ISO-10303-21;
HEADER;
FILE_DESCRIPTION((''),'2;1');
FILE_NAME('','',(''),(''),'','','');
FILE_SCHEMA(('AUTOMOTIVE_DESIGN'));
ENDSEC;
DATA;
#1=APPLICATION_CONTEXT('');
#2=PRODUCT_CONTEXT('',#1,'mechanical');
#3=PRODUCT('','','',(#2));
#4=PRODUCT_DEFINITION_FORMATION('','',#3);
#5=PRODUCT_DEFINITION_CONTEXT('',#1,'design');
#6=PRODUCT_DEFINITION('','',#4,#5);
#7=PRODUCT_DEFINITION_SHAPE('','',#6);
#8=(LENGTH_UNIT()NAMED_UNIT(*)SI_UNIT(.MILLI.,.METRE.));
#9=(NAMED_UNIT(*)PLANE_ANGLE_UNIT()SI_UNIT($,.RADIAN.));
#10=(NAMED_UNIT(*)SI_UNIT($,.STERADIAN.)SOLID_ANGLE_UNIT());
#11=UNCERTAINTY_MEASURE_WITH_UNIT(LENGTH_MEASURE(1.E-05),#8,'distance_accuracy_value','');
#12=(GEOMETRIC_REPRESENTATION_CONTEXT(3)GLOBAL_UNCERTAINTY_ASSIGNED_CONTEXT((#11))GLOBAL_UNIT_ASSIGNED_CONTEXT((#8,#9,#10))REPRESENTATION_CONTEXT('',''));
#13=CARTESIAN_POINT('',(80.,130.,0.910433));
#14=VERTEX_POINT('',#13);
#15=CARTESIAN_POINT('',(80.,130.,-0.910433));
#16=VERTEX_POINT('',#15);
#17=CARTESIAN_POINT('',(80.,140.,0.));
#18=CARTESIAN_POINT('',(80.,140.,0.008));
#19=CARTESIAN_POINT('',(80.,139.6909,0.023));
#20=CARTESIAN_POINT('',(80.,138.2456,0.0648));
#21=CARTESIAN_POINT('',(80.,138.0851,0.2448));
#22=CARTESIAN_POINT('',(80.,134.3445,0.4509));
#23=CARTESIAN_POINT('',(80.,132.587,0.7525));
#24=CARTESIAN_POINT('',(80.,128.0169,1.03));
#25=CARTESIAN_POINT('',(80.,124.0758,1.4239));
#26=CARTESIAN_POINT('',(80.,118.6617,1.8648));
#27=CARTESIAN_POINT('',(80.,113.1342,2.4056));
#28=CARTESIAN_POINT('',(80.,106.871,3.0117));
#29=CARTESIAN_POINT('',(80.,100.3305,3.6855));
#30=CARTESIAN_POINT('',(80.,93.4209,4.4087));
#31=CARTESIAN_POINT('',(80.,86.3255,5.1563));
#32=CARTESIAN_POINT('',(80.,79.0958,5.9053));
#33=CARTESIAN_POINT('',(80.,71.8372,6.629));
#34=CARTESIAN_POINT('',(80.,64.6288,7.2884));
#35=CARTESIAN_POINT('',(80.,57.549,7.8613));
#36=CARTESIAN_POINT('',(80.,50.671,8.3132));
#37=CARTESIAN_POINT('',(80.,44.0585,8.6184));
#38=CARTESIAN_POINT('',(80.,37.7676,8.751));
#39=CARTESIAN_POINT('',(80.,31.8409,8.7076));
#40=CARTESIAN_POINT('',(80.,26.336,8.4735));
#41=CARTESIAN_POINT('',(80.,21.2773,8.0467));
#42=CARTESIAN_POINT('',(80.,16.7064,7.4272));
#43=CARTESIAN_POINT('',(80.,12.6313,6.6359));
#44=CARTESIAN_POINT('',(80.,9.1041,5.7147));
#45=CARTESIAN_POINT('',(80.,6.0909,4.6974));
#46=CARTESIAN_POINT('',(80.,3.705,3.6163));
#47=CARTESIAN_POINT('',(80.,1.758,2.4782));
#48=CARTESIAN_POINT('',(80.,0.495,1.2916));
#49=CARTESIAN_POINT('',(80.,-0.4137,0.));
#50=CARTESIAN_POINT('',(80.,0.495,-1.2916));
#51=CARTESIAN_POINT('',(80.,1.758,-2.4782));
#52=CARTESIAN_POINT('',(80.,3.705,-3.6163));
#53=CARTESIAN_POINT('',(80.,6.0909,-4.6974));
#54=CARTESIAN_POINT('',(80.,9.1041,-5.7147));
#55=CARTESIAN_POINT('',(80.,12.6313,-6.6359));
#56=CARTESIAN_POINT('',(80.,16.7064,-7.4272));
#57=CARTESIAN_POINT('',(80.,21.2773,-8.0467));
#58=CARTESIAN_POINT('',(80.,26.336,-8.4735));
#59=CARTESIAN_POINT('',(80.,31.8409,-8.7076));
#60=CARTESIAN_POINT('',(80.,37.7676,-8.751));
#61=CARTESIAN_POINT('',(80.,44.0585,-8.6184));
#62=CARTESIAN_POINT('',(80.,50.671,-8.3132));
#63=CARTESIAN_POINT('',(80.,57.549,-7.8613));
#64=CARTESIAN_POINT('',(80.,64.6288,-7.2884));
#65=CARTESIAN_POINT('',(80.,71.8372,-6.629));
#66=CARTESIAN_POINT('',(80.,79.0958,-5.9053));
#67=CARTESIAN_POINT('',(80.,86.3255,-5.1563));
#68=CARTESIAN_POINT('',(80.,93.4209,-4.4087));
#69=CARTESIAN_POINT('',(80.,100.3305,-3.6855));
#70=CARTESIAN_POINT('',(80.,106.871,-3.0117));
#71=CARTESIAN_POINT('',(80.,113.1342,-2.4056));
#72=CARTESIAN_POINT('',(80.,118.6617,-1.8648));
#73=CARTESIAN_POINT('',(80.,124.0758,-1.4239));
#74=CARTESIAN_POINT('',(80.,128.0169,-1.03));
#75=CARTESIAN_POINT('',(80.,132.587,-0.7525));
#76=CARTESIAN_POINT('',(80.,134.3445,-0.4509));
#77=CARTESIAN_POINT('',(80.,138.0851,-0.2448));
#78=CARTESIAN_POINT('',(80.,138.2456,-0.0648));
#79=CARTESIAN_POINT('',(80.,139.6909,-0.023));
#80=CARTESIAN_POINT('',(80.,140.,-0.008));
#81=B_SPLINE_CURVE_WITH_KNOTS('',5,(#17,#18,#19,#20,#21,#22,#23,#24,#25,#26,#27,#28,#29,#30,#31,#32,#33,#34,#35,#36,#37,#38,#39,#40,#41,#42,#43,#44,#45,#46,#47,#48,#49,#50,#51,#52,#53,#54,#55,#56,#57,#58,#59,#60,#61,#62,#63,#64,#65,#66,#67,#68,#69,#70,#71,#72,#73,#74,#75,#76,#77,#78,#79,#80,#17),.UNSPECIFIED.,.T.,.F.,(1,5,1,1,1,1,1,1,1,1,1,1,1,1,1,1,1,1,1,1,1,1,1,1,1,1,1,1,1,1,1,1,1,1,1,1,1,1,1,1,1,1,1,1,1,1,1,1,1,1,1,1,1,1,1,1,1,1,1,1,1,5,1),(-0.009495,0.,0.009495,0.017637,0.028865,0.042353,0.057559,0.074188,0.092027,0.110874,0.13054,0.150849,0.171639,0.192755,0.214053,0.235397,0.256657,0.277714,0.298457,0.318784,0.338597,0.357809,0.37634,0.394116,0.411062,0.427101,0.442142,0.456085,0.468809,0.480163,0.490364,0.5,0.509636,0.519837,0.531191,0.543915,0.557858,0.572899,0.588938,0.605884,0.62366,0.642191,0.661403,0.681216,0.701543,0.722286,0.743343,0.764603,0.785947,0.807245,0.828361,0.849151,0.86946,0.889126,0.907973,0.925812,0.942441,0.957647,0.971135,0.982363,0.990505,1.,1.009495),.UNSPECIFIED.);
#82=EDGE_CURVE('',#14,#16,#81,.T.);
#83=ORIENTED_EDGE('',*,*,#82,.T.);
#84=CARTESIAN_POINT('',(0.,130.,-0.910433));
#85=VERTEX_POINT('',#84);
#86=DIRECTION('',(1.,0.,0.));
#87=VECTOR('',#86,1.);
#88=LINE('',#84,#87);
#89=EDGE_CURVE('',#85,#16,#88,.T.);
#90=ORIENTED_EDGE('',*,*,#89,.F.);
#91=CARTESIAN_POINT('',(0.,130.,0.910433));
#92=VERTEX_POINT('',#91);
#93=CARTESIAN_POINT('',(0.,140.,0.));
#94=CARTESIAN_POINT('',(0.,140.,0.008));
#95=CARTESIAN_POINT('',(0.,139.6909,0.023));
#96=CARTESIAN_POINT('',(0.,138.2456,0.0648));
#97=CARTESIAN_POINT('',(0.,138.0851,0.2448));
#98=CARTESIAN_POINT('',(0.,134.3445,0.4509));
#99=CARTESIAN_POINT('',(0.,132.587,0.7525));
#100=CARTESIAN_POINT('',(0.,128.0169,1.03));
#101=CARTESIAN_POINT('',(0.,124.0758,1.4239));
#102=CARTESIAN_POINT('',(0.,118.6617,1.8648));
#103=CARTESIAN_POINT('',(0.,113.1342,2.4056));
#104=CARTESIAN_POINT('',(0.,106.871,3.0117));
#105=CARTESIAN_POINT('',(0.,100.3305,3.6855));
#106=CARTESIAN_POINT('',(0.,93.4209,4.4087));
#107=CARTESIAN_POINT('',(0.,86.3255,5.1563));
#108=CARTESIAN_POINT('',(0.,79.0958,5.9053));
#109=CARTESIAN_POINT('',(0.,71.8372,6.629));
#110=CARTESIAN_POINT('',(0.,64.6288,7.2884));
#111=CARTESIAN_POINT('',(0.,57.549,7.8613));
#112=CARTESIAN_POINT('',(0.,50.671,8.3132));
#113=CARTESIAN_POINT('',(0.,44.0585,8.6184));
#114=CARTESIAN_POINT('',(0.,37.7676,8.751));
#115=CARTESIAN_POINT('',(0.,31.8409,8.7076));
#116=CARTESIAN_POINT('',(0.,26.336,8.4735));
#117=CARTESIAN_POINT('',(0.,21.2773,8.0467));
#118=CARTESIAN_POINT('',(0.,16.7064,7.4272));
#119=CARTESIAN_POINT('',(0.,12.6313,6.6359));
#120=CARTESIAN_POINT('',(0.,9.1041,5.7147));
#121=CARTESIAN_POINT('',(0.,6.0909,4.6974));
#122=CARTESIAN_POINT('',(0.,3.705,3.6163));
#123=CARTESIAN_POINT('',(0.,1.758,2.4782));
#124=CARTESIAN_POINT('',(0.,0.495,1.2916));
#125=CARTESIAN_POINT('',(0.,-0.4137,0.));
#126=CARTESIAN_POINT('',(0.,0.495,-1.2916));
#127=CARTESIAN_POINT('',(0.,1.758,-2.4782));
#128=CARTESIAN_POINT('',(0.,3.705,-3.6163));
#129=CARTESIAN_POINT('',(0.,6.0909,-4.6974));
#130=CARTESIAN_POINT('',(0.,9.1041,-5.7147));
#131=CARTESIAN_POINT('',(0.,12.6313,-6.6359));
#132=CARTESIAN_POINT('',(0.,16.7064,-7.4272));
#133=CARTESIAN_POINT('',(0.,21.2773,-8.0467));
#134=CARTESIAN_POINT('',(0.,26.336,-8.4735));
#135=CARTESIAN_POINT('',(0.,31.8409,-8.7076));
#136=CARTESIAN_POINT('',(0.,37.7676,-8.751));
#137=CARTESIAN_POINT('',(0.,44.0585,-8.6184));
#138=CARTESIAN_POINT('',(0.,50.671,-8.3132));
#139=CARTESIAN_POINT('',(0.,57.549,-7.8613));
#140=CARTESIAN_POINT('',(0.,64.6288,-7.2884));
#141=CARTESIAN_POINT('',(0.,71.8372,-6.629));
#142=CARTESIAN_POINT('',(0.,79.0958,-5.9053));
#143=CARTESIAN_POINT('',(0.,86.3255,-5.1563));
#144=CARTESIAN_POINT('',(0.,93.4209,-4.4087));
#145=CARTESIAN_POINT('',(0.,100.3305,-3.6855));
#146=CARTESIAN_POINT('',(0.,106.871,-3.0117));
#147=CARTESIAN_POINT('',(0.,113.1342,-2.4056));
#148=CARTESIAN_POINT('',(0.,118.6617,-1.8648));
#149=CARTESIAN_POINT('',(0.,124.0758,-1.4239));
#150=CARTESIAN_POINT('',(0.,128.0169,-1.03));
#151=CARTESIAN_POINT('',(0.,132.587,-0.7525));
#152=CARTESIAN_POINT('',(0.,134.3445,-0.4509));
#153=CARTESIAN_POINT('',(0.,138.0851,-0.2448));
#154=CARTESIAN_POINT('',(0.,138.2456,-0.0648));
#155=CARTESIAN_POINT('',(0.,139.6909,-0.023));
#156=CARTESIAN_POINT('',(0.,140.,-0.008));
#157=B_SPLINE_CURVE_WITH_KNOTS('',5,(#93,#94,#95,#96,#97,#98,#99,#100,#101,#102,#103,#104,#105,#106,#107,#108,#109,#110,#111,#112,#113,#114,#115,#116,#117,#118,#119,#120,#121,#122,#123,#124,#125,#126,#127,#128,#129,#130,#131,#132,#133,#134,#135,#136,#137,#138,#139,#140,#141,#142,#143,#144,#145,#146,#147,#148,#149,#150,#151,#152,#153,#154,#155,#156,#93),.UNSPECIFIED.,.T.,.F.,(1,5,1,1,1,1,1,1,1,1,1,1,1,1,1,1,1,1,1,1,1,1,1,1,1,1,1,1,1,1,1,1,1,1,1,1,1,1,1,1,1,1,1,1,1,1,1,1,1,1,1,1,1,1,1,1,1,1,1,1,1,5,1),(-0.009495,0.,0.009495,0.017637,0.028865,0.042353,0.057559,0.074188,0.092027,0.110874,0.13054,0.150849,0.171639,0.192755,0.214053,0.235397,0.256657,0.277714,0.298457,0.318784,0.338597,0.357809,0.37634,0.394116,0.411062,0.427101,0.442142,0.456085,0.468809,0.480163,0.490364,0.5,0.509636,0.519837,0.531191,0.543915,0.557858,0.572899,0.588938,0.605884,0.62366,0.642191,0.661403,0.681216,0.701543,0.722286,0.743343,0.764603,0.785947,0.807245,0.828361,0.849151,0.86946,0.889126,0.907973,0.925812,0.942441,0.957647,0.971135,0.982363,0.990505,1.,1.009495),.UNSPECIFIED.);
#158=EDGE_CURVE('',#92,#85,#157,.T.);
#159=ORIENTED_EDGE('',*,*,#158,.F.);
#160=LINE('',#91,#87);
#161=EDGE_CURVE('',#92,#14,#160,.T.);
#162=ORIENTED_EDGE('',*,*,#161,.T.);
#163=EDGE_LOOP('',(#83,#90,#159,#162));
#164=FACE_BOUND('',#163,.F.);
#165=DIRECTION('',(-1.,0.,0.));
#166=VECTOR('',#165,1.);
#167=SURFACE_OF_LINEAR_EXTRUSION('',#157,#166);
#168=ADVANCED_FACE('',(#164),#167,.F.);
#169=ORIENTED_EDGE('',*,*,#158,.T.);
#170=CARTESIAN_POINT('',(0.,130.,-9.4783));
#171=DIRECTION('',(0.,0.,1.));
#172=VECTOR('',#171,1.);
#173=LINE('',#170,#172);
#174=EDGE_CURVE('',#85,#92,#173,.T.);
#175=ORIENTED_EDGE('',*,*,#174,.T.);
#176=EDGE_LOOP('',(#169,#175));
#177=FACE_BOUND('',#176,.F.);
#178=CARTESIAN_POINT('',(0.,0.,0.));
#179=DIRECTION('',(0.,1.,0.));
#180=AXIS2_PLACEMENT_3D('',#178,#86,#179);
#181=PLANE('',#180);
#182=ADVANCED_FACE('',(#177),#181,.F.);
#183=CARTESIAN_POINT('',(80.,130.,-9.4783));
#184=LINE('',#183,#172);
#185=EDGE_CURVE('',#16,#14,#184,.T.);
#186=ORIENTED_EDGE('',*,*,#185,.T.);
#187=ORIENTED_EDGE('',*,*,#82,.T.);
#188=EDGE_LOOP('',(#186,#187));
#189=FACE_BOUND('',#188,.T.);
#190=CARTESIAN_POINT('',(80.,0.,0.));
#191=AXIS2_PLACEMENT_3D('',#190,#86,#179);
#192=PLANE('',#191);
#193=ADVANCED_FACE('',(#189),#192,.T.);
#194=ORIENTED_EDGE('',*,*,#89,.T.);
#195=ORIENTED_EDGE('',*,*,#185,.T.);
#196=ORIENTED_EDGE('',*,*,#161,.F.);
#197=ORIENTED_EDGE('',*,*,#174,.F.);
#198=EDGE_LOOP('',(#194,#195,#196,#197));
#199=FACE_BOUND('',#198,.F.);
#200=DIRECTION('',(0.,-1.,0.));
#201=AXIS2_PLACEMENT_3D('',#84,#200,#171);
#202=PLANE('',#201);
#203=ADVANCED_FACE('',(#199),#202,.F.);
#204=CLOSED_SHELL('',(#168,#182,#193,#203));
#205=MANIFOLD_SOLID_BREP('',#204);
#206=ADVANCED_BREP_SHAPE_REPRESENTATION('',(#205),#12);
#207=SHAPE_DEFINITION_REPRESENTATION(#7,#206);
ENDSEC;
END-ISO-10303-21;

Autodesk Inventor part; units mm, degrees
ref_plane "YZ Plane" through (0, 0, 0) normal (1, 0, 0) x (0, 1, 0)
ref_plane "XZ Plane" through (0, 0, 0) normal (0, 1, 0) x (-1, 0, 0)
ref_plane "XY Plane" through (0, 0, 0) normal (0, 0, 1) x (1, 0, 0)
sketch "Sketch1" plane through (0, 0, 0) normal (1, 0, 0) x (0, 1, 0)
  spline S0 degree 5 poles (140, 0) (140, 0.008) (139.6909, 0.023) (138.2456, 0.0648) (138.0851, 0.2448) (134.3445, 0.4509) (132.587, 0.7525) (128.0169, 1.03) (124.0758, 1.4239) (118.6617, 1.8648) (113.1342, 2.4056) (106.871, 3.0117) (100.3305, 3.6855) (93.4209, 4.4087) (86.3255, 5.1563) (79.0958, 5.9053) (71.8372, 6.629) (64.6288, 7.2884) (57.549, 7.8613) (50.671, 8.3132) (44.0585, 8.6184) (37.7676, 8.751) (31.8409, 8.7076) (26.336, 8.4735) (21.2773, 8.0467) (16.7064, 7.4272) (12.6313, 6.6359) (9.1041, 5.7147) (6.0909, 4.6974) (3.705, 3.6163) (1.758, 2.4782) (0.495, 1.2916) (-0.4137, 0) (0.495, -1.2916) (1.758, -2.4782) (3.705, -3.6163) (6.0909, -4.6974) (9.1041, -5.7147) (12.6313, -6.6359) (16.7064, -7.4272) (21.2773, -8.0467) (26.336, -8.4735) (31.8409, -8.7076) (37.7676, -8.751) (44.0585, -8.6184) (50.671, -8.3132) (57.549, -7.8613) (64.6288, -7.2884) (71.8372, -6.629) (79.0958, -5.9053) (86.3255, -5.1563) (93.4209, -4.4087) (100.3305, -3.6855) (106.871, -3.0117) (113.1342, -2.4056) (118.6617, -1.8648) (124.0758, -1.4239) (128.0169, -1.03) (132.587, -0.7525) (134.3445, -0.4509) (138.0851, -0.2448) (138.2456, -0.0648) (139.6909, -0.023) (140, -0.008) (140, 0) knots 0 0 0 0 0 0 0.009495 0.017637 0.028865 0.042353 0.057559 0.074188 0.092027 0.110874 0.13054 0.150849 0.171639 0.192755 0.214053 0.235397 0.256657 0.277714 0.298457 0.318784 0.338597 0.357809 0.37634 0.394116 0.411062 0.427101 0.442142 0.456085 0.468809 0.480163 0.490364 0.5 0.509636 0.519837 0.531191 0.543915 0.557858 0.572899 0.588938 0.605884 0.62366 0.642191 0.661403 0.681216 0.701543 0.722286 0.743343 0.764603 0.785947 0.807245 0.828361 0.849151 0.86946 0.889126 0.907973 0.925812 0.942441 0.957647 0.971135 0.982363 0.990505 1 1 1 1 1 1
  line L0 (130, 16.3724) -> (164.1986, 16.3724)
  line L1 (164.1986, 16.3724) -> (164.1986, -9.4783)
  line L2 (164.1986, -9.4783) -> (130, -9.4783)
  line L3 (130, -9.4783) -> (130, 16.3724)
  point P0 (138.0834, 0.1512)
  point P1 (135.8252, 0.3794)
  point P2 (132.797, 0.6664)
  point P3 (129.0044, 0.9884)
  point P4 (124.4796, 1.3706)
  point P5 (119.294, 1.8284)
  point P6 (113.526, 2.3674)
  point P7 (107.2624, 2.982)
  point P8 (100.5956, 3.661)
  point P9 (93.6194, 4.389)
  point P10 (86.4304, 5.1422)
  point P11 (79.1224, 5.8954)
  point P12 (71.785, 6.6192)
  point P13 (64.505, 7.28)
  point P14 (57.3608, 7.8484)
  point P15 (50.4266, 8.2936)
  point P16 (43.7668, 8.5876)
  point P17 (37.4346, 8.7094)
  point P18 (31.479, 8.6478)
  point P19 (25.9504, 8.393)
  point P20 (20.881, 7.9408)
  point P21 (16.2974, 7.2954)
  point P22 (12.222, 6.4778)
  point P23 (8.6772, 5.5216)
  point P24 (5.6966, 4.4618)
  point P25 (3.3082, 3.332)
  point P26 (1.533, 2.17)
  point P27 (0.4018, 1.0262)
  point P28 (0, 0)
  point P29 (0.4018, -1.0262)
  point P30 (1.533, -2.17)
  point P31 (3.3082, -3.332)
  point P32 (5.6966, -4.4618)
  point P33 (8.6772, -5.5216)
  point P34 (12.222, -6.4778)
  point P35 (16.2974, -7.2954)
  point P36 (20.881, -7.9408)
  point P37 (25.9504, -8.393)
  point P38 (31.479, -8.6478)
  point P39 (37.4346, -8.7094)
  point P40 (43.7668, -8.5876)
  point P41 (50.4266, -8.2936)
  point P42 (57.3608, -7.8484)
  point P43 (64.505, -7.28)
  point P44 (71.785, -6.6192)
  point P45 (79.1224, -5.8954)
  point P46 (86.4304, -5.1422)
  point P47 (93.6194, -4.389)
  point P48 (100.5956, -3.661)
  point P49 (107.2624, -2.982)
  point P50 (113.526, -2.3674)
  point P51 (119.294, -1.8284)
  point P52 (124.4796, -1.3706)
  point P53 (129.0044, -0.9884)
  point P54 (132.797, -0.6664)
  point P55 (135.8252, -0.3794)
  point P56 (138.0834, -0.1512)
  point P57 (139.5086, -0.0294)
  point P58 (130, -0.9104)
  point P59 (130, 0.9104)
  dimension "d9" = 130
extrude "Extrusion1" add sketch "Sketch1" along normal blind 80 contours L3 S0 picked at (63.1596, 2.072)
properties part number "IISRD_Rudder_v2" material "Polystyrene, Expanded"
